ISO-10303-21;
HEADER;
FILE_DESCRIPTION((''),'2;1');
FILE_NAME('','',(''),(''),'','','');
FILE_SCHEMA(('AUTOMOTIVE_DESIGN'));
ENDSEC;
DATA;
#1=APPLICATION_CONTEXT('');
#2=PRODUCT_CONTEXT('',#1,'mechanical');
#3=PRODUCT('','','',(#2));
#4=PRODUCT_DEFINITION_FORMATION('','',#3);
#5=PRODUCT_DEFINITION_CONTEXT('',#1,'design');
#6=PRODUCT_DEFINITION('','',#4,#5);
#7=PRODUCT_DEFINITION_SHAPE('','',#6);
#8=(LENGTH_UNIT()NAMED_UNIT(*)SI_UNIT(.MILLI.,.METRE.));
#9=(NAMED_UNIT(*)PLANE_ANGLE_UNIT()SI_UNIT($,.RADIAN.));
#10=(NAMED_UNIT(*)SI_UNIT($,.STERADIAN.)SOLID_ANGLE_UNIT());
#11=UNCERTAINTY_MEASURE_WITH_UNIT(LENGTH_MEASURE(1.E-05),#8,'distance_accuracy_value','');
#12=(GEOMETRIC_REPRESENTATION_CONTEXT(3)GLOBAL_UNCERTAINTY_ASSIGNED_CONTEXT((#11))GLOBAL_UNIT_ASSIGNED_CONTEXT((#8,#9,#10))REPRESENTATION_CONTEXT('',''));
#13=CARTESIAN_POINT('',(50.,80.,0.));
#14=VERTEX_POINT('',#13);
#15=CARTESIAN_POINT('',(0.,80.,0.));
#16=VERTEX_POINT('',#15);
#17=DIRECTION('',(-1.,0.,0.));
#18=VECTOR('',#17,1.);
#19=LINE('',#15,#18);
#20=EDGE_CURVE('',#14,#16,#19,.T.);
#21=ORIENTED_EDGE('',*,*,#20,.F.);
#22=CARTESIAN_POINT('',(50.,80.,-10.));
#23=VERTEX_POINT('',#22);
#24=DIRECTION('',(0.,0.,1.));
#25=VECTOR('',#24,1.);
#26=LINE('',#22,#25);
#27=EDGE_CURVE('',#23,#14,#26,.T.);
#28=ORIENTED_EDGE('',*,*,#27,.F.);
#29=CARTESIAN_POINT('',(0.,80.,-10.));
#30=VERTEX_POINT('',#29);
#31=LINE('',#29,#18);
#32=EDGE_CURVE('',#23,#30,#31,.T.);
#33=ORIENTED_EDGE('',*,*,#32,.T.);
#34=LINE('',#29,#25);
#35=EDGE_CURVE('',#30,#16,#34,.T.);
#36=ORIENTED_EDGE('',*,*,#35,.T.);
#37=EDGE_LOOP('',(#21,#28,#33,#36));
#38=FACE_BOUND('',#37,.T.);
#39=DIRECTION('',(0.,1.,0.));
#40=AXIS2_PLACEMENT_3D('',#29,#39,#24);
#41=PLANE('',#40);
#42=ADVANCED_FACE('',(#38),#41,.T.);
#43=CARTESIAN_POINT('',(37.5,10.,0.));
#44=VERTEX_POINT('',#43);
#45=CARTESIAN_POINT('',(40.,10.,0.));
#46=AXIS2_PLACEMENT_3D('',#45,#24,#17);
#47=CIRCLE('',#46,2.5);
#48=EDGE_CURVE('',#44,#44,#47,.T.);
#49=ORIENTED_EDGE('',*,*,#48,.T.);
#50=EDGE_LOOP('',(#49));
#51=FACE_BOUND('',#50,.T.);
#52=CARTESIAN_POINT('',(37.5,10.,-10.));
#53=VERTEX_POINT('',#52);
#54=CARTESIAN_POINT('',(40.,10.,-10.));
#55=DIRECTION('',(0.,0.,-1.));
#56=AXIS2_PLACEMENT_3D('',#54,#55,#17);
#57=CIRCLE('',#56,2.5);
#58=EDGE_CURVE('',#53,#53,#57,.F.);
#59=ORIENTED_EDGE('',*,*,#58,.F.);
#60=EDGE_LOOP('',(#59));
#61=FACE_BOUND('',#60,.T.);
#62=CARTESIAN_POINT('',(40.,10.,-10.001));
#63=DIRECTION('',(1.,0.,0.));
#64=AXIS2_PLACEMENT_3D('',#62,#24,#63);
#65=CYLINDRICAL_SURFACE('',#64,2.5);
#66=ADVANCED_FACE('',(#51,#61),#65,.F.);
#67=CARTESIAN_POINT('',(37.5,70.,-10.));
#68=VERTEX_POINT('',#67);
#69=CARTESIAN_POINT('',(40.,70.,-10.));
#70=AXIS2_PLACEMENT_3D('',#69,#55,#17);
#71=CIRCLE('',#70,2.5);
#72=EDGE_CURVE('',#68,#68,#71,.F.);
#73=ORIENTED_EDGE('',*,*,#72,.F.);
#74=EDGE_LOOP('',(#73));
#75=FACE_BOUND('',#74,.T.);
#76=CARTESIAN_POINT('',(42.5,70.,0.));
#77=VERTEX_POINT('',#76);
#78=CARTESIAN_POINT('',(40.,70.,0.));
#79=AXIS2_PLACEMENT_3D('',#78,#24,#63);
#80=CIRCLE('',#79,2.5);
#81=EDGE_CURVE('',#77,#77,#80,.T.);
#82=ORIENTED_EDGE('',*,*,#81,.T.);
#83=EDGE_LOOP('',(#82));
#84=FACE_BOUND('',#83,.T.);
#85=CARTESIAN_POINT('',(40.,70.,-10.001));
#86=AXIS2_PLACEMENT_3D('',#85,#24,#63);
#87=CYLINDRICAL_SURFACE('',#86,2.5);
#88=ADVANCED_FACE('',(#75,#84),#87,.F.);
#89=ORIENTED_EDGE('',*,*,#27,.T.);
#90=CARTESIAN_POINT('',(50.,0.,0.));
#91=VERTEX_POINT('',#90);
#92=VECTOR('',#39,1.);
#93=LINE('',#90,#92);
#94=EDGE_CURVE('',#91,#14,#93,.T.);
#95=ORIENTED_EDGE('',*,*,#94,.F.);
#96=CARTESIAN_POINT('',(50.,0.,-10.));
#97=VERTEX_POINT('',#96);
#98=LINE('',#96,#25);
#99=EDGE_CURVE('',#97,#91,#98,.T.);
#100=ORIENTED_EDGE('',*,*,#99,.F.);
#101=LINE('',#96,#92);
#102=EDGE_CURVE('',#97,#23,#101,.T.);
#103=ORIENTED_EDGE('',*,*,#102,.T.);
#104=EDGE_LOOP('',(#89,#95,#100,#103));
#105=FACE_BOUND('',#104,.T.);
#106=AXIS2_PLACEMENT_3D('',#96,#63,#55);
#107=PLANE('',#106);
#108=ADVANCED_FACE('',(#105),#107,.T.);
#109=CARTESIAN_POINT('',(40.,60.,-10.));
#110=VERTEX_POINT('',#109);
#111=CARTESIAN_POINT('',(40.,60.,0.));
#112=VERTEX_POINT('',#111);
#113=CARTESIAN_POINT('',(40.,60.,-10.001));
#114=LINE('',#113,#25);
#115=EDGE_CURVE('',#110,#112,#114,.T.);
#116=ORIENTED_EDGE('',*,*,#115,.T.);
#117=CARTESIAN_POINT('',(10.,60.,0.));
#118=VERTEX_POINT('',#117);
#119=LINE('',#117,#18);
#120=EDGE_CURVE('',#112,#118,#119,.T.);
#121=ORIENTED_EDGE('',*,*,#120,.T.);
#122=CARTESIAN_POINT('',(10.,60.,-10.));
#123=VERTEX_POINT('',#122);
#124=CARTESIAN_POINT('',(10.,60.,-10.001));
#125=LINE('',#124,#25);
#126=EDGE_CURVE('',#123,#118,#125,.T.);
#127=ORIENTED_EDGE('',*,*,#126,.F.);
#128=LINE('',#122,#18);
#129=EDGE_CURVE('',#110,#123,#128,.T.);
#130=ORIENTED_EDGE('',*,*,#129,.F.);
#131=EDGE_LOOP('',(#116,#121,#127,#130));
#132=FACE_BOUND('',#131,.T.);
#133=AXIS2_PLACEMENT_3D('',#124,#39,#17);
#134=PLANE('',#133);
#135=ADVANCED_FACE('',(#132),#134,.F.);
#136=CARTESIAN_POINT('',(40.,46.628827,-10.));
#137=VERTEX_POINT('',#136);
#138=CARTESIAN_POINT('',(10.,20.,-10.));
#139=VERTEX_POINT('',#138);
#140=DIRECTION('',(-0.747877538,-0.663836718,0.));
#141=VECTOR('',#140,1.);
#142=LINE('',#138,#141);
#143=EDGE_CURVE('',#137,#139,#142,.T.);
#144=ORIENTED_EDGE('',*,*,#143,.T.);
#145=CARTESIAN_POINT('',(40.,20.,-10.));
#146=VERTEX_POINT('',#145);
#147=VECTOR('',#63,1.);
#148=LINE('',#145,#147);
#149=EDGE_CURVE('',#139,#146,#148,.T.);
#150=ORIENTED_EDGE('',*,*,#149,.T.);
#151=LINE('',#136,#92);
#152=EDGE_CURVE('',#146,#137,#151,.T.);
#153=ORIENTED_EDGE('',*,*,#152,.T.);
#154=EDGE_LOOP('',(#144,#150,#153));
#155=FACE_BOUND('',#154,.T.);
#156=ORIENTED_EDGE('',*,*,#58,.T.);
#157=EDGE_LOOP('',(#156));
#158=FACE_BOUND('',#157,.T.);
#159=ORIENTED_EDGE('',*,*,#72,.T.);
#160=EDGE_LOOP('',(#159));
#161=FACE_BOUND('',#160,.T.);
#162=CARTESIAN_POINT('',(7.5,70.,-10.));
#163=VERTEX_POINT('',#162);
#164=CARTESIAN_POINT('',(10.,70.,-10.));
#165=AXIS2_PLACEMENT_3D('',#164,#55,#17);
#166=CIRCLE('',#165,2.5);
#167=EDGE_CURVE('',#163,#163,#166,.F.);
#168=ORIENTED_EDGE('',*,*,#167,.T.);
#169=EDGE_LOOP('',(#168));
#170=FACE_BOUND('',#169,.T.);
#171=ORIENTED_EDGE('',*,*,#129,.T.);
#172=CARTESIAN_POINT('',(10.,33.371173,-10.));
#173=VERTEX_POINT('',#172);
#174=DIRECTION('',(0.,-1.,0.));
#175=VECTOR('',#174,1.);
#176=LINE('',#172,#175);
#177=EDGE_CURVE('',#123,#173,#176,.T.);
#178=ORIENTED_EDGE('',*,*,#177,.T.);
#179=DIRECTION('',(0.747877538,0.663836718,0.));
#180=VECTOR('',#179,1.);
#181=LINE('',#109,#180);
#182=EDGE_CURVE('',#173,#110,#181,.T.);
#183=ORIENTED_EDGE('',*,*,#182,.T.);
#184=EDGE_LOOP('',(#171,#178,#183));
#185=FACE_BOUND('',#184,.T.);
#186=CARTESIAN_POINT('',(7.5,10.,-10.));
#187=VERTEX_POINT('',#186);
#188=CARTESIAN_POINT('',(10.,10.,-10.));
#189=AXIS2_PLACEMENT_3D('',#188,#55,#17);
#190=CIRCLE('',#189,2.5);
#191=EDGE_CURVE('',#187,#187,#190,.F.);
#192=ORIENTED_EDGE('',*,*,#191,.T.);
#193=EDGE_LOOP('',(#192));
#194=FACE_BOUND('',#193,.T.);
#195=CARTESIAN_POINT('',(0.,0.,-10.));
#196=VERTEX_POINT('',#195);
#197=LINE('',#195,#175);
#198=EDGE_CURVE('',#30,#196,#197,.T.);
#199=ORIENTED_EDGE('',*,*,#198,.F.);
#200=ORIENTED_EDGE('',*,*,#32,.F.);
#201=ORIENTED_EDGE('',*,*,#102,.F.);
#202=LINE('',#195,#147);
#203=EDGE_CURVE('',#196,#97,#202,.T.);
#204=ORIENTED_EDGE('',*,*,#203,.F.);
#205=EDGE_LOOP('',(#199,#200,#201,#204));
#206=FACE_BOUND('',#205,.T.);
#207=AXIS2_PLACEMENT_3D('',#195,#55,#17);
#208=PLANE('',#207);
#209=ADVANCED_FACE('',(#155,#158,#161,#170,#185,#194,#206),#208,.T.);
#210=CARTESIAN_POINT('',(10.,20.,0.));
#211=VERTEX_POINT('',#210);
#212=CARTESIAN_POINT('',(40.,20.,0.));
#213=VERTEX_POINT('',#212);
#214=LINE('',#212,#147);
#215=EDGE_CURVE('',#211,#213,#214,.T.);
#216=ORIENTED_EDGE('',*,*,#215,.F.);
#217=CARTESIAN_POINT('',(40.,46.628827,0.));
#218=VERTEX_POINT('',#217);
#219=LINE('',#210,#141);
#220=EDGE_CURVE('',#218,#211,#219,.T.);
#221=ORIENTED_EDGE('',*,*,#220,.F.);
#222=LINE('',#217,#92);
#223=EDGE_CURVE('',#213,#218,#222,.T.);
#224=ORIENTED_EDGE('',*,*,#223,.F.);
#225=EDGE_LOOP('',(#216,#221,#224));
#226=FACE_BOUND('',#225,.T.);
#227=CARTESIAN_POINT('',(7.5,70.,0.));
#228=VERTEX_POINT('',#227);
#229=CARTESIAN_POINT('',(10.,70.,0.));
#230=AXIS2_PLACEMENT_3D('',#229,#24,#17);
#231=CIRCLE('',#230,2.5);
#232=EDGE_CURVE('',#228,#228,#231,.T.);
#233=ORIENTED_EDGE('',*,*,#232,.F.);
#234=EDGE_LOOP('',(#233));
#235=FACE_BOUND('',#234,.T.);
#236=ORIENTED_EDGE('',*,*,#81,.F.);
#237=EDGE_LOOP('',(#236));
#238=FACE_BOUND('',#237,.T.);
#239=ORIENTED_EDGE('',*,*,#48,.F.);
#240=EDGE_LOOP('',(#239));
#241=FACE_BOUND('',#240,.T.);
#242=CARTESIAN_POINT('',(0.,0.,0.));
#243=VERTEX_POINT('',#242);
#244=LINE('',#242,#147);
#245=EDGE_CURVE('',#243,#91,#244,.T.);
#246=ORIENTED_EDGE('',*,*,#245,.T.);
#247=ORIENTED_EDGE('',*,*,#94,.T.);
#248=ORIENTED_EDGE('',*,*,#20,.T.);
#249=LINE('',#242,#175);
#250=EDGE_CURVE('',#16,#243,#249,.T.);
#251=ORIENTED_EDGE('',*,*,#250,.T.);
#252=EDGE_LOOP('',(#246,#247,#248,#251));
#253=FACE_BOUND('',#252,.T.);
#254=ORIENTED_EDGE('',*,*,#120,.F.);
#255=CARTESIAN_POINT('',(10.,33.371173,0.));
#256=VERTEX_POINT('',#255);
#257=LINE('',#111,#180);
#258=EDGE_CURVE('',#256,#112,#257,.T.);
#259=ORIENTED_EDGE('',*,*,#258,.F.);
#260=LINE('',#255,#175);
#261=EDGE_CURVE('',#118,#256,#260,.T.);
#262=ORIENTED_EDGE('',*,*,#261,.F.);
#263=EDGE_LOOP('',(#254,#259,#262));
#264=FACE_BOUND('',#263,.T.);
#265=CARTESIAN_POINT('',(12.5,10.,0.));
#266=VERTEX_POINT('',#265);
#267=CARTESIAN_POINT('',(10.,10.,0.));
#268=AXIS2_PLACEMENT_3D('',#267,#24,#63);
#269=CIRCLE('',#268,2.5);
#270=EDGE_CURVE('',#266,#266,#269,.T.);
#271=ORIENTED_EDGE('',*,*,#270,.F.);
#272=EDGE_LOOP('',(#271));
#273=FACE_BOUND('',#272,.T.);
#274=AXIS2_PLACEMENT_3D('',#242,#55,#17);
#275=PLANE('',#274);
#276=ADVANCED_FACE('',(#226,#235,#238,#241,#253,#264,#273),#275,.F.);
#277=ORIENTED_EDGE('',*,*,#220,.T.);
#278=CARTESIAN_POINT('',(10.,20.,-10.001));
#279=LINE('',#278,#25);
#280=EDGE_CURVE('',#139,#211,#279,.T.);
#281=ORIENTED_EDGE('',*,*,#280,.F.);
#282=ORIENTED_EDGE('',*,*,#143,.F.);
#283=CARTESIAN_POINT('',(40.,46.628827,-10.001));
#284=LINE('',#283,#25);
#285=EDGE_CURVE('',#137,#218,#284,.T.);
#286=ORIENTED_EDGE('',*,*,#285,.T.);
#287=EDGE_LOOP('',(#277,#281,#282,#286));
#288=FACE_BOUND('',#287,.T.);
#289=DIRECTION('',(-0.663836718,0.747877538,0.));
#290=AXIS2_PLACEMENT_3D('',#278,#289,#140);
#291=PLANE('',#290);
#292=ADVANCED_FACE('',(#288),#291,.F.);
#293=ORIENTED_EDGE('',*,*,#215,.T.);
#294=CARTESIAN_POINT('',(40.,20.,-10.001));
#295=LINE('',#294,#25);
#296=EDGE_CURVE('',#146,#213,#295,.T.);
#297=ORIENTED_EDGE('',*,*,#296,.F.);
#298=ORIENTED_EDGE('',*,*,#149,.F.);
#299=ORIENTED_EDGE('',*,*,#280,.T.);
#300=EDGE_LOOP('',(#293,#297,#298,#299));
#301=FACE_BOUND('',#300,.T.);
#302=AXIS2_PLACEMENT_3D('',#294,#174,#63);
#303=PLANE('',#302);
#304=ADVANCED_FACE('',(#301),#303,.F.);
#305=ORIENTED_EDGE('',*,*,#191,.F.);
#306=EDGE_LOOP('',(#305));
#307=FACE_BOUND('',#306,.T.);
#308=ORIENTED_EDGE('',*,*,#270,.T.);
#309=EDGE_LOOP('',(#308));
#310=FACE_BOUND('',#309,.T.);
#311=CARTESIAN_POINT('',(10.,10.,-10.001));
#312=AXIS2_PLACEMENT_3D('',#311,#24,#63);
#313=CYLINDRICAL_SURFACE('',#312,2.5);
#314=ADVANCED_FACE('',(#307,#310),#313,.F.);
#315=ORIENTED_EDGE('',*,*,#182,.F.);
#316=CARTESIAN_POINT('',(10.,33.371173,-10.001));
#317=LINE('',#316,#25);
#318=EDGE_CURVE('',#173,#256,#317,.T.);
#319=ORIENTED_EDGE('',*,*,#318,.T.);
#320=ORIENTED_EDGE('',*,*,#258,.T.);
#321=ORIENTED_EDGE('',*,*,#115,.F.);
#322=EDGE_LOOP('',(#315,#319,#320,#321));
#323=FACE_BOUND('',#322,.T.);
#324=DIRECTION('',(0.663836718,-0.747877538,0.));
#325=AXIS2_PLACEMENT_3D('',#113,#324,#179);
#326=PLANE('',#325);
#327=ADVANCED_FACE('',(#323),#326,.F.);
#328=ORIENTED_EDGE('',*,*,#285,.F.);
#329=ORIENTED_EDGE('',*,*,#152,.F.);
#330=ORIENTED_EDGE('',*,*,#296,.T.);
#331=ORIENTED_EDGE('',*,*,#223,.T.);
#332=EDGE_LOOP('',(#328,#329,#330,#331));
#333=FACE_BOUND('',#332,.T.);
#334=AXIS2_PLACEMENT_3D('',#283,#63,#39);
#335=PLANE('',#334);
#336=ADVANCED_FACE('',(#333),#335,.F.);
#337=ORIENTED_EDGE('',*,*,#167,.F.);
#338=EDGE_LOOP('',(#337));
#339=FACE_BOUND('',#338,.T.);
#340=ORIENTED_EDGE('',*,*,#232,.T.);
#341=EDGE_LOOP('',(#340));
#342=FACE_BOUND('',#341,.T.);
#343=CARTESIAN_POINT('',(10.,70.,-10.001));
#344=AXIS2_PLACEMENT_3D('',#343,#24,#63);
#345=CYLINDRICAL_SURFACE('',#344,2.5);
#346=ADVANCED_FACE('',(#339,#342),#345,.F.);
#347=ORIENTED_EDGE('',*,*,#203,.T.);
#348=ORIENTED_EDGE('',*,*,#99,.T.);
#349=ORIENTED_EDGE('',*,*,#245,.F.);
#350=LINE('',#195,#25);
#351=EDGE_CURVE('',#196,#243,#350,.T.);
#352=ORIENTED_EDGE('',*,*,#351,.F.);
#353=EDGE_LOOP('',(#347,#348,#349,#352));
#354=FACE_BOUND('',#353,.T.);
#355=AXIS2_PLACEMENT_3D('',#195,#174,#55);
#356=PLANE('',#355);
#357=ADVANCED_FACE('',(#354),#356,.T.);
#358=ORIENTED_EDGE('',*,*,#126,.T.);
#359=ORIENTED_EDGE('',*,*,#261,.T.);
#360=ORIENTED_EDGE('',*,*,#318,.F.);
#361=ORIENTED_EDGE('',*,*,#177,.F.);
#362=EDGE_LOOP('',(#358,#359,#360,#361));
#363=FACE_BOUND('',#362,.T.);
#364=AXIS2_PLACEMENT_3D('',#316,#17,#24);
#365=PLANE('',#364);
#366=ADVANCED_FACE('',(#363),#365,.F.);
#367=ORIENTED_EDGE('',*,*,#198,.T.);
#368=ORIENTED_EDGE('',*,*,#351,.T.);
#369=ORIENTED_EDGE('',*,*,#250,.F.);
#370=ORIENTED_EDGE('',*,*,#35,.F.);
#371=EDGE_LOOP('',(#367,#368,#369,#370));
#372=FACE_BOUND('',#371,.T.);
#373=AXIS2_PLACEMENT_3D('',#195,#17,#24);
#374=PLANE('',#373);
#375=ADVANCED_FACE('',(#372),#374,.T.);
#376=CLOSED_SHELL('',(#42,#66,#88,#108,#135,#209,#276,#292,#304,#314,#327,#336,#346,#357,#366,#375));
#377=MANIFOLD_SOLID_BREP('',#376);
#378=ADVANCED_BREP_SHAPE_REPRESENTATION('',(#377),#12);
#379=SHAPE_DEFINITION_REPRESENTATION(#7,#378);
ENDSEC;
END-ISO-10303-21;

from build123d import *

# Parameters (mm, degrees)
SKETCH1_W          = 50
SKETCH1_H          = 80
BASE_FLANGE1_DEPTH = 10
CUT_EXTRUDE1_REACH = 96.868
SKETCH6_R          = 2.5


# Sheet-metal steps are written as plain solids
with BuildPart() as part:
    # Sketch1 → Base-Flange1 (new body)
    with BuildSketch(Plane.XY):
        with Locations((25, 40)):
            Rectangle(SKETCH1_W, SKETCH1_H)
    extrude(amount=-BASE_FLANGE1_DEPTH)

    # Sketch6 → Cut-Extrude1 (cut, up to next)
    with BuildSketch(Plane.XY, mode=Mode.PRIVATE) as cut_extrude1_sk1:
        with Locations((40, 70)):
            Circle(SKETCH6_R)
    cut_extrude1_tool1 = extrude(cut_extrude1_sk1.sketch, amount=-CUT_EXTRUDE1_REACH, mode=Mode.PRIVATE) & part.part
    # Sketch6 → Cut-Extrude1 (cut, up to next)
    with BuildSketch(Plane.XY, mode=Mode.PRIVATE) as cut_extrude1_sk2:
        with Locations((10, 10)):
            Circle(SKETCH6_R)
    cut_extrude1_tool2 = extrude(cut_extrude1_sk2.sketch, amount=-CUT_EXTRUDE1_REACH, mode=Mode.PRIVATE) & part.part
    # Sketch6 → Cut-Extrude1 (cut, up to next)
    with BuildSketch(Plane.XY, mode=Mode.PRIVATE) as cut_extrude1_sk3:
        with Locations(Location((10, 70, 0), (0, 0, 180))):
            Circle(SKETCH6_R)
    cut_extrude1_tool3 = extrude(cut_extrude1_sk3.sketch, amount=-CUT_EXTRUDE1_REACH, mode=Mode.PRIVATE) & part.part
    # Sketch6 → Cut-Extrude1 (cut, up to next)
    with BuildSketch(Plane.XY, mode=Mode.PRIVATE) as cut_extrude1_sk4:
        with Locations(Location((40, 10, 0), (0, 0, 180))):
            Circle(SKETCH6_R)
    cut_extrude1_tool4 = extrude(cut_extrude1_sk4.sketch, amount=-CUT_EXTRUDE1_REACH, mode=Mode.PRIVATE) & part.part
    # Sketch6 → Cut-Extrude1 (cut, up to next)
    with BuildSketch(Plane.XY, mode=Mode.PRIVATE) as cut_extrude1_sk5:
        Polygon((40, 46.628826929), (40, 20), (10, 20), align=None)
    cut_extrude1_tool5 = extrude(cut_extrude1_sk5.sketch, amount=-CUT_EXTRUDE1_REACH, mode=Mode.PRIVATE) & part.part
    # Sketch6 → Cut-Extrude1 (cut, up to next)
    with BuildSketch(Plane.XY, mode=Mode.PRIVATE) as cut_extrude1_sk6:
        Polygon((40, 60), (10, 33.371173071), (10, 60), align=None)
    cut_extrude1_tool6 = extrude(cut_extrude1_sk6.sketch, amount=-CUT_EXTRUDE1_REACH, mode=Mode.PRIVATE) & part.part
    add(cut_extrude1_tool1.solids().sort_by_distance((40, 70, 0))[0], mode=Mode.SUBTRACT)
    add(cut_extrude1_tool2.solids().sort_by_distance((10, 10, 0))[0], mode=Mode.SUBTRACT)
    add(cut_extrude1_tool3.solids().sort_by_distance((10, 70, 0))[0], mode=Mode.SUBTRACT)
    add(cut_extrude1_tool4.solids().sort_by_distance((40, 10, 0))[0], mode=Mode.SUBTRACT)
    add(cut_extrude1_tool5.solids().sort_by_distance((30, 28.876276, 0))[0], mode=Mode.SUBTRACT)
    add(cut_extrude1_tool6.solids().sort_by_distance((20, 51.123724, 0))[0], mode=Mode.SUBTRACT)


solid = part.part
